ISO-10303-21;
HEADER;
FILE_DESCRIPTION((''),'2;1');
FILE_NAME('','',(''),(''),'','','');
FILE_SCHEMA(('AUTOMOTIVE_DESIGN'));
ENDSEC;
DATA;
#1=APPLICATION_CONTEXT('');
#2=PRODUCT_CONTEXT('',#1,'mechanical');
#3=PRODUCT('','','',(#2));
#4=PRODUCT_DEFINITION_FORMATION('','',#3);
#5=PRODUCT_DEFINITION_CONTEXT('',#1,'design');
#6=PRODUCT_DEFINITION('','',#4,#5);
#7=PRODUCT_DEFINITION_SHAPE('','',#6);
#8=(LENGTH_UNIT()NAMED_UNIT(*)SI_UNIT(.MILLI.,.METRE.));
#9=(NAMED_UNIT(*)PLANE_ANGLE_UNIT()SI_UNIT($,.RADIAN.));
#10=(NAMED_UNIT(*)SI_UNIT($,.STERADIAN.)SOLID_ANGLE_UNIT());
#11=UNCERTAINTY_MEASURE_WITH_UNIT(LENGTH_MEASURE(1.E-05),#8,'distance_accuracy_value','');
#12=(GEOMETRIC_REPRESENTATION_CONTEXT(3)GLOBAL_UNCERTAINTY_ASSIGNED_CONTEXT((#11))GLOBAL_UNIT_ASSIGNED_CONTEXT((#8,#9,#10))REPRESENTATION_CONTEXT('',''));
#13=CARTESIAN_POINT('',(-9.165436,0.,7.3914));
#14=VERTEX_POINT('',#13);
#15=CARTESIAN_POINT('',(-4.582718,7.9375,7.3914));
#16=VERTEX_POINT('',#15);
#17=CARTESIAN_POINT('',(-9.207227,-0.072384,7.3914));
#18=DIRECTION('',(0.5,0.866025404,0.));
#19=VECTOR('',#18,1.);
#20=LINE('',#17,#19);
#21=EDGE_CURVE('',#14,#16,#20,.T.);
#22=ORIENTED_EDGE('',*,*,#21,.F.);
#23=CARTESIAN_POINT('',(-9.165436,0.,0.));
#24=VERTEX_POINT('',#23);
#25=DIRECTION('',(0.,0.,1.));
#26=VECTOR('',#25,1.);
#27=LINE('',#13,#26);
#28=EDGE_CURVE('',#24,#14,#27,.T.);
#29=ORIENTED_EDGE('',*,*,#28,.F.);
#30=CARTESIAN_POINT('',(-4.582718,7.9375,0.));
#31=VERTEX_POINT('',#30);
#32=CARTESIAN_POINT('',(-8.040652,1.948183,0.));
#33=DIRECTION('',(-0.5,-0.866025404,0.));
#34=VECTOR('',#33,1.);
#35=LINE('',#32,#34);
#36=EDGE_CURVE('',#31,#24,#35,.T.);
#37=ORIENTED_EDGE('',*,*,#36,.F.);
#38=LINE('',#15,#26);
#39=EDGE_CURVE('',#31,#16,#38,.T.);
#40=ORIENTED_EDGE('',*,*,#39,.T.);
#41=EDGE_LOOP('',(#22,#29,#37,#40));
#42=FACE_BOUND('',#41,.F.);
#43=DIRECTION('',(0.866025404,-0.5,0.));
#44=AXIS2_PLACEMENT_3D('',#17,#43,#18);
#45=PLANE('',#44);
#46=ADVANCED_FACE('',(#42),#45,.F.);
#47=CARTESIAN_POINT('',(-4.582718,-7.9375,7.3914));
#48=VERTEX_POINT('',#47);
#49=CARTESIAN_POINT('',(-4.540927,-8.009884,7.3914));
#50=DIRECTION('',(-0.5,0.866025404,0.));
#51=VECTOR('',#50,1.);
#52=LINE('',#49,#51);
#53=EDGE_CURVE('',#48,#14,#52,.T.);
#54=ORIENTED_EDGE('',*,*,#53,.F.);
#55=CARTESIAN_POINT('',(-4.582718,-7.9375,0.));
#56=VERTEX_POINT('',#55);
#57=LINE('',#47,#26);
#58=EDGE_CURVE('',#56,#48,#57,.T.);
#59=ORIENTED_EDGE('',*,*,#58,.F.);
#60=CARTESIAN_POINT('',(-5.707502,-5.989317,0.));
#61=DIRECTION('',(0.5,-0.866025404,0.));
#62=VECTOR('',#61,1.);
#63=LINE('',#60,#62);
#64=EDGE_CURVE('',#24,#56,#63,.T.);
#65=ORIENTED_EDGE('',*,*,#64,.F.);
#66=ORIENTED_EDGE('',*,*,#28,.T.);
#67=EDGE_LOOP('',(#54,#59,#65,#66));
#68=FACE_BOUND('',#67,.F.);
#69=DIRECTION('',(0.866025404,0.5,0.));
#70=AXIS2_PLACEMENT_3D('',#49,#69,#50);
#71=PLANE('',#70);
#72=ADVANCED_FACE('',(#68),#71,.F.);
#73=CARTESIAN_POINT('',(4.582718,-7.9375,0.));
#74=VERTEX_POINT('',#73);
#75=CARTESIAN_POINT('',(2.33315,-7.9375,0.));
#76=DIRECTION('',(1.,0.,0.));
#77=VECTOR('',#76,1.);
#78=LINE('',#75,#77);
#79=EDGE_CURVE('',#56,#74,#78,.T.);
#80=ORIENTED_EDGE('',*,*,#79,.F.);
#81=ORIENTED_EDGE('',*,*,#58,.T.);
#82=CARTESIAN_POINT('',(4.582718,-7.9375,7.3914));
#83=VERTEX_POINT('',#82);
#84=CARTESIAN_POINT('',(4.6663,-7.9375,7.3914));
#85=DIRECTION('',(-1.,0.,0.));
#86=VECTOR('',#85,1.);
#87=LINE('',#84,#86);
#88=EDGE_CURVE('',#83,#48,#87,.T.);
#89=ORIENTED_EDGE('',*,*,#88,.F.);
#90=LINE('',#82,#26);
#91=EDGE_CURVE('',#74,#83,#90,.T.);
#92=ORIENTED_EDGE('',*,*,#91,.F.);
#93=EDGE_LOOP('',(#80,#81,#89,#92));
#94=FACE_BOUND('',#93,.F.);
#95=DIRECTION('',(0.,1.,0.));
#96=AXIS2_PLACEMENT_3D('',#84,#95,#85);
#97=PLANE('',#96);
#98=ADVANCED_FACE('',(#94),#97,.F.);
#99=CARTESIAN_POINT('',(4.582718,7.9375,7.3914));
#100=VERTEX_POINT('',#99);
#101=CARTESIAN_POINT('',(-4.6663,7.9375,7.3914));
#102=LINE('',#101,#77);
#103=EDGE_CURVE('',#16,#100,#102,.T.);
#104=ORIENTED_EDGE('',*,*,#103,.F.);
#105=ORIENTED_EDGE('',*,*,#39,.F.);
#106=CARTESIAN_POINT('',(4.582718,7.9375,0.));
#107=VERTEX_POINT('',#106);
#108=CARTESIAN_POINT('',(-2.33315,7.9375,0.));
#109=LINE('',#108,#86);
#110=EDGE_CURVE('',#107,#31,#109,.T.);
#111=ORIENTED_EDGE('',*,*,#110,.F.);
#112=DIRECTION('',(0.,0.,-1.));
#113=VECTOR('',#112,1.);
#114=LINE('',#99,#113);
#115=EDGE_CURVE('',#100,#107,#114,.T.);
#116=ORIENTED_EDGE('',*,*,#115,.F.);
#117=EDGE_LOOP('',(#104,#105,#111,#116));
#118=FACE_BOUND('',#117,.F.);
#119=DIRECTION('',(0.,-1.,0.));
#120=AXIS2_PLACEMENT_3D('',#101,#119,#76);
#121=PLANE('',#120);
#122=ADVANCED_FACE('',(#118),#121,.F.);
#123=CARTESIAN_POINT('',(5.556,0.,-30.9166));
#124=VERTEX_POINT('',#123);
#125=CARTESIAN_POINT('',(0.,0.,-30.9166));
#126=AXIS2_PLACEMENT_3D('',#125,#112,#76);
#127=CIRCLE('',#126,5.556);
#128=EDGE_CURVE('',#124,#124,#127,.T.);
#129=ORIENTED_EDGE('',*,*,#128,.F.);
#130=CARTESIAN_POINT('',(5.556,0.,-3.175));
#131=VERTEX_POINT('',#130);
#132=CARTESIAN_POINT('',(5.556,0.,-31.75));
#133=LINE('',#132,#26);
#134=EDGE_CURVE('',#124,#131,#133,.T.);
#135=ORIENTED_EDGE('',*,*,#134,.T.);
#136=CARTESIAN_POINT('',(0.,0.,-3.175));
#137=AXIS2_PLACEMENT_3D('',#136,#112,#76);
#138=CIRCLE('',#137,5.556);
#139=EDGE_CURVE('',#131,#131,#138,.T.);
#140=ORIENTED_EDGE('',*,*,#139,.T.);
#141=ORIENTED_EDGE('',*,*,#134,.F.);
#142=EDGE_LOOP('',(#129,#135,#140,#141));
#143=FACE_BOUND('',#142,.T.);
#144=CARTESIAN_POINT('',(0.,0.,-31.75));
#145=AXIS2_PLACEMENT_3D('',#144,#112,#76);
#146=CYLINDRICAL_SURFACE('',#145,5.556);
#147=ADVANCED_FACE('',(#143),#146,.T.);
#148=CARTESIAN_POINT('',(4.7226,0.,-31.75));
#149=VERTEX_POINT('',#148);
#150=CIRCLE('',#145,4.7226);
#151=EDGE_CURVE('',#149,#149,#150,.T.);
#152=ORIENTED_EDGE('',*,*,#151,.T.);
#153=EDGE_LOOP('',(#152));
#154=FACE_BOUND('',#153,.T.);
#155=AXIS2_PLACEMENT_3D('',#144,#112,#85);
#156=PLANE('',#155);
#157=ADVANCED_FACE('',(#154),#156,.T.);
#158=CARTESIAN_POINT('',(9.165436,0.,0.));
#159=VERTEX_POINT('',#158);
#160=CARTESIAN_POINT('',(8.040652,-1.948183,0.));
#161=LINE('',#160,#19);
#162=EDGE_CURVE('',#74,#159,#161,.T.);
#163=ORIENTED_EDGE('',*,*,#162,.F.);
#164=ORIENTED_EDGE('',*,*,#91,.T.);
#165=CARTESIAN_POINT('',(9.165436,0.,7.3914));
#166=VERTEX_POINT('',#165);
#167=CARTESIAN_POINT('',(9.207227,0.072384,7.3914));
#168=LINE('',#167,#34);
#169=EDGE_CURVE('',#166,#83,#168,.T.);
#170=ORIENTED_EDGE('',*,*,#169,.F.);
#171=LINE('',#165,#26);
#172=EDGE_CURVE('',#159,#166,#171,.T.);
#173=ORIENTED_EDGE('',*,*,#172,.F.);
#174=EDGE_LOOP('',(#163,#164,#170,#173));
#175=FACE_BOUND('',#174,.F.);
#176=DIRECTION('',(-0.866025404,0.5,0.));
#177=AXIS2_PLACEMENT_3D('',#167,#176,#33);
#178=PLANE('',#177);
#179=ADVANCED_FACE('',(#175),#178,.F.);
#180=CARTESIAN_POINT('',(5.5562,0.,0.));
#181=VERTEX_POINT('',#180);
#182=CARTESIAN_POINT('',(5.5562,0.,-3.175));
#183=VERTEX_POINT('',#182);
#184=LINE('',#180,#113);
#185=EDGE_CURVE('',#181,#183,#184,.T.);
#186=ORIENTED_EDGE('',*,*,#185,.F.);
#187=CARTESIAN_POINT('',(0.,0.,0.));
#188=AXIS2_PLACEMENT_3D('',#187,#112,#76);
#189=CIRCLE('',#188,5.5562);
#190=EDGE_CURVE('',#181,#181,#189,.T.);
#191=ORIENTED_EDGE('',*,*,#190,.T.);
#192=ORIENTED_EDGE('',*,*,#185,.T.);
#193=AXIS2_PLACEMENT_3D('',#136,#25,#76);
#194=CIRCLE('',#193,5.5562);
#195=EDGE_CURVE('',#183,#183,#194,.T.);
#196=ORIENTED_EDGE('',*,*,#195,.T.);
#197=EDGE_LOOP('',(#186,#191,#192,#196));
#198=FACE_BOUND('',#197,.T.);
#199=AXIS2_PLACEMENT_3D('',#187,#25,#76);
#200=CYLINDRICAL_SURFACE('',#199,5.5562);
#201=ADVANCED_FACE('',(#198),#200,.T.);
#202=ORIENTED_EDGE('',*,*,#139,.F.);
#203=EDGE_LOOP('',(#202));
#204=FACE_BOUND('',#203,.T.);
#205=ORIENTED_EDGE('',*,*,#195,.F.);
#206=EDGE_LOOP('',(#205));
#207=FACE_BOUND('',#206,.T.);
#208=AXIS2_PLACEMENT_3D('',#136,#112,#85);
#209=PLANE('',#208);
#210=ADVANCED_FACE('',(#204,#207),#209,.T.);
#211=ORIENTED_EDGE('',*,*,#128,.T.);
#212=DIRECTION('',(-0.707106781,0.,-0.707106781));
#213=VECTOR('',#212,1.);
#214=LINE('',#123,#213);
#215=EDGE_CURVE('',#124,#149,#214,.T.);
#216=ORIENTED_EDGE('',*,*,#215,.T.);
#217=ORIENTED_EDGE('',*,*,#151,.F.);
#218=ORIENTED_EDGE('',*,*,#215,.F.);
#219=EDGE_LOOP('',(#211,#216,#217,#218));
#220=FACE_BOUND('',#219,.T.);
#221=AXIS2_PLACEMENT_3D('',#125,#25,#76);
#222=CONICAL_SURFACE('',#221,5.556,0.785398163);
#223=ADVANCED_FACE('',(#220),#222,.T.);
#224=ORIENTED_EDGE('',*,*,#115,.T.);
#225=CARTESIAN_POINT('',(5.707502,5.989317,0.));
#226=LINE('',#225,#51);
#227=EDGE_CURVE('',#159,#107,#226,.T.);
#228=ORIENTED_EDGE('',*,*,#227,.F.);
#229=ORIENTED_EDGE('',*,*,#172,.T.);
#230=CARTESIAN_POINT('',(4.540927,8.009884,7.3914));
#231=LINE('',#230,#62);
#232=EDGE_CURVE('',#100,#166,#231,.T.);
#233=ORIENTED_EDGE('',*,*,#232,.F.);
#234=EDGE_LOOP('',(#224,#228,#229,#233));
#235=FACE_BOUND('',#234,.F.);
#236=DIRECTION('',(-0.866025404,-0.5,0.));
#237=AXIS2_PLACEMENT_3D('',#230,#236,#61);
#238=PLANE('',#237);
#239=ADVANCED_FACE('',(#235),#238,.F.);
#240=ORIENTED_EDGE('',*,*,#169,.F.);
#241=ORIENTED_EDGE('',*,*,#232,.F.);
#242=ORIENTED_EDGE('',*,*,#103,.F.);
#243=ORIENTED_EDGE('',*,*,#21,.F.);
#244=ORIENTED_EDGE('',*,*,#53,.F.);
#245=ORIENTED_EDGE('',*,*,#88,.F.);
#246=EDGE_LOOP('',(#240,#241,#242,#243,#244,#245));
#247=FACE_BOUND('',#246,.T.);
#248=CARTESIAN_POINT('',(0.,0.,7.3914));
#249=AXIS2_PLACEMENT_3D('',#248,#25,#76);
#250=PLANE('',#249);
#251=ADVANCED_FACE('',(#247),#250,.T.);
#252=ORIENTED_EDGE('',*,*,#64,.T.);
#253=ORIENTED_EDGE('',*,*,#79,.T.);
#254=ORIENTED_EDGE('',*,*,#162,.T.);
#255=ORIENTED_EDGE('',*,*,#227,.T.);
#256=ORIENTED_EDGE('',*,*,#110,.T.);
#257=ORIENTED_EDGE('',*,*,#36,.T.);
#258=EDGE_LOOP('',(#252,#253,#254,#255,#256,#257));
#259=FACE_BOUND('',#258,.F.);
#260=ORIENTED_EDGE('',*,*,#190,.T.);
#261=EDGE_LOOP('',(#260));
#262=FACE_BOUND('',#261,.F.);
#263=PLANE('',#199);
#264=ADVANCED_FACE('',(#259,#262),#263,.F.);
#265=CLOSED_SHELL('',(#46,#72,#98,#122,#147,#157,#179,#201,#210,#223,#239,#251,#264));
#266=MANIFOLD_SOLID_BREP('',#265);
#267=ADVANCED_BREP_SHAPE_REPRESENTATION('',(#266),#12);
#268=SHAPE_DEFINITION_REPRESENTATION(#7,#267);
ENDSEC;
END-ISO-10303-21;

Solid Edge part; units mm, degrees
sketch "Sketch1" plane through (0, 0, 0) normal (0, 0, 1) x (1, 0, 0)
  circle A0 centre (0, 0) radius 9.2075
  dimension "D1" = 18.415
extrude "Protrusion1" add sketch "Sketch1" along normal blind 7.3914
sketch "Sketch2" plane through (0, 0, 0) normal (0, 0, -1) x (1, 0, 0)
  circle A0 centre (0, 0) radius 5.5562
extrude "Protrusion2" add sketch "Sketch2" along normal blind 31.75
sketch "Sketch3" plane through (0, 0, -31.75) normal (0, 0, -1) x (1, 0, 0)
  circle A0 centre (0, 0) radius 5.556
extrude "Cutout1" cut sketch "Sketch3" against normal blind 28.575 flip side to cut
chamfer "Chamfer_1" distance 0.8334 angle 45 1 edges at (-5.556, 0, -31.75)
sketch "Sketch4" plane through (0, 0, 7.3914) normal (0, 0, 1) x (1, 0, 0)
  line L0 (-4.6663, 7.9375) -> (4.6663, 7.9375)
  dimension "D1" = 15.875
extrude "Cutout2" cut sketch "Sketch4" against normal up to next material side at (0, 7.9875, 7.3914)
pattern_circular "Pattern1" count 6 over 360 about axis through (0, 0, 7.3914) along (0, 0, 1) of "Cutout2"
properties part number "24102601"
